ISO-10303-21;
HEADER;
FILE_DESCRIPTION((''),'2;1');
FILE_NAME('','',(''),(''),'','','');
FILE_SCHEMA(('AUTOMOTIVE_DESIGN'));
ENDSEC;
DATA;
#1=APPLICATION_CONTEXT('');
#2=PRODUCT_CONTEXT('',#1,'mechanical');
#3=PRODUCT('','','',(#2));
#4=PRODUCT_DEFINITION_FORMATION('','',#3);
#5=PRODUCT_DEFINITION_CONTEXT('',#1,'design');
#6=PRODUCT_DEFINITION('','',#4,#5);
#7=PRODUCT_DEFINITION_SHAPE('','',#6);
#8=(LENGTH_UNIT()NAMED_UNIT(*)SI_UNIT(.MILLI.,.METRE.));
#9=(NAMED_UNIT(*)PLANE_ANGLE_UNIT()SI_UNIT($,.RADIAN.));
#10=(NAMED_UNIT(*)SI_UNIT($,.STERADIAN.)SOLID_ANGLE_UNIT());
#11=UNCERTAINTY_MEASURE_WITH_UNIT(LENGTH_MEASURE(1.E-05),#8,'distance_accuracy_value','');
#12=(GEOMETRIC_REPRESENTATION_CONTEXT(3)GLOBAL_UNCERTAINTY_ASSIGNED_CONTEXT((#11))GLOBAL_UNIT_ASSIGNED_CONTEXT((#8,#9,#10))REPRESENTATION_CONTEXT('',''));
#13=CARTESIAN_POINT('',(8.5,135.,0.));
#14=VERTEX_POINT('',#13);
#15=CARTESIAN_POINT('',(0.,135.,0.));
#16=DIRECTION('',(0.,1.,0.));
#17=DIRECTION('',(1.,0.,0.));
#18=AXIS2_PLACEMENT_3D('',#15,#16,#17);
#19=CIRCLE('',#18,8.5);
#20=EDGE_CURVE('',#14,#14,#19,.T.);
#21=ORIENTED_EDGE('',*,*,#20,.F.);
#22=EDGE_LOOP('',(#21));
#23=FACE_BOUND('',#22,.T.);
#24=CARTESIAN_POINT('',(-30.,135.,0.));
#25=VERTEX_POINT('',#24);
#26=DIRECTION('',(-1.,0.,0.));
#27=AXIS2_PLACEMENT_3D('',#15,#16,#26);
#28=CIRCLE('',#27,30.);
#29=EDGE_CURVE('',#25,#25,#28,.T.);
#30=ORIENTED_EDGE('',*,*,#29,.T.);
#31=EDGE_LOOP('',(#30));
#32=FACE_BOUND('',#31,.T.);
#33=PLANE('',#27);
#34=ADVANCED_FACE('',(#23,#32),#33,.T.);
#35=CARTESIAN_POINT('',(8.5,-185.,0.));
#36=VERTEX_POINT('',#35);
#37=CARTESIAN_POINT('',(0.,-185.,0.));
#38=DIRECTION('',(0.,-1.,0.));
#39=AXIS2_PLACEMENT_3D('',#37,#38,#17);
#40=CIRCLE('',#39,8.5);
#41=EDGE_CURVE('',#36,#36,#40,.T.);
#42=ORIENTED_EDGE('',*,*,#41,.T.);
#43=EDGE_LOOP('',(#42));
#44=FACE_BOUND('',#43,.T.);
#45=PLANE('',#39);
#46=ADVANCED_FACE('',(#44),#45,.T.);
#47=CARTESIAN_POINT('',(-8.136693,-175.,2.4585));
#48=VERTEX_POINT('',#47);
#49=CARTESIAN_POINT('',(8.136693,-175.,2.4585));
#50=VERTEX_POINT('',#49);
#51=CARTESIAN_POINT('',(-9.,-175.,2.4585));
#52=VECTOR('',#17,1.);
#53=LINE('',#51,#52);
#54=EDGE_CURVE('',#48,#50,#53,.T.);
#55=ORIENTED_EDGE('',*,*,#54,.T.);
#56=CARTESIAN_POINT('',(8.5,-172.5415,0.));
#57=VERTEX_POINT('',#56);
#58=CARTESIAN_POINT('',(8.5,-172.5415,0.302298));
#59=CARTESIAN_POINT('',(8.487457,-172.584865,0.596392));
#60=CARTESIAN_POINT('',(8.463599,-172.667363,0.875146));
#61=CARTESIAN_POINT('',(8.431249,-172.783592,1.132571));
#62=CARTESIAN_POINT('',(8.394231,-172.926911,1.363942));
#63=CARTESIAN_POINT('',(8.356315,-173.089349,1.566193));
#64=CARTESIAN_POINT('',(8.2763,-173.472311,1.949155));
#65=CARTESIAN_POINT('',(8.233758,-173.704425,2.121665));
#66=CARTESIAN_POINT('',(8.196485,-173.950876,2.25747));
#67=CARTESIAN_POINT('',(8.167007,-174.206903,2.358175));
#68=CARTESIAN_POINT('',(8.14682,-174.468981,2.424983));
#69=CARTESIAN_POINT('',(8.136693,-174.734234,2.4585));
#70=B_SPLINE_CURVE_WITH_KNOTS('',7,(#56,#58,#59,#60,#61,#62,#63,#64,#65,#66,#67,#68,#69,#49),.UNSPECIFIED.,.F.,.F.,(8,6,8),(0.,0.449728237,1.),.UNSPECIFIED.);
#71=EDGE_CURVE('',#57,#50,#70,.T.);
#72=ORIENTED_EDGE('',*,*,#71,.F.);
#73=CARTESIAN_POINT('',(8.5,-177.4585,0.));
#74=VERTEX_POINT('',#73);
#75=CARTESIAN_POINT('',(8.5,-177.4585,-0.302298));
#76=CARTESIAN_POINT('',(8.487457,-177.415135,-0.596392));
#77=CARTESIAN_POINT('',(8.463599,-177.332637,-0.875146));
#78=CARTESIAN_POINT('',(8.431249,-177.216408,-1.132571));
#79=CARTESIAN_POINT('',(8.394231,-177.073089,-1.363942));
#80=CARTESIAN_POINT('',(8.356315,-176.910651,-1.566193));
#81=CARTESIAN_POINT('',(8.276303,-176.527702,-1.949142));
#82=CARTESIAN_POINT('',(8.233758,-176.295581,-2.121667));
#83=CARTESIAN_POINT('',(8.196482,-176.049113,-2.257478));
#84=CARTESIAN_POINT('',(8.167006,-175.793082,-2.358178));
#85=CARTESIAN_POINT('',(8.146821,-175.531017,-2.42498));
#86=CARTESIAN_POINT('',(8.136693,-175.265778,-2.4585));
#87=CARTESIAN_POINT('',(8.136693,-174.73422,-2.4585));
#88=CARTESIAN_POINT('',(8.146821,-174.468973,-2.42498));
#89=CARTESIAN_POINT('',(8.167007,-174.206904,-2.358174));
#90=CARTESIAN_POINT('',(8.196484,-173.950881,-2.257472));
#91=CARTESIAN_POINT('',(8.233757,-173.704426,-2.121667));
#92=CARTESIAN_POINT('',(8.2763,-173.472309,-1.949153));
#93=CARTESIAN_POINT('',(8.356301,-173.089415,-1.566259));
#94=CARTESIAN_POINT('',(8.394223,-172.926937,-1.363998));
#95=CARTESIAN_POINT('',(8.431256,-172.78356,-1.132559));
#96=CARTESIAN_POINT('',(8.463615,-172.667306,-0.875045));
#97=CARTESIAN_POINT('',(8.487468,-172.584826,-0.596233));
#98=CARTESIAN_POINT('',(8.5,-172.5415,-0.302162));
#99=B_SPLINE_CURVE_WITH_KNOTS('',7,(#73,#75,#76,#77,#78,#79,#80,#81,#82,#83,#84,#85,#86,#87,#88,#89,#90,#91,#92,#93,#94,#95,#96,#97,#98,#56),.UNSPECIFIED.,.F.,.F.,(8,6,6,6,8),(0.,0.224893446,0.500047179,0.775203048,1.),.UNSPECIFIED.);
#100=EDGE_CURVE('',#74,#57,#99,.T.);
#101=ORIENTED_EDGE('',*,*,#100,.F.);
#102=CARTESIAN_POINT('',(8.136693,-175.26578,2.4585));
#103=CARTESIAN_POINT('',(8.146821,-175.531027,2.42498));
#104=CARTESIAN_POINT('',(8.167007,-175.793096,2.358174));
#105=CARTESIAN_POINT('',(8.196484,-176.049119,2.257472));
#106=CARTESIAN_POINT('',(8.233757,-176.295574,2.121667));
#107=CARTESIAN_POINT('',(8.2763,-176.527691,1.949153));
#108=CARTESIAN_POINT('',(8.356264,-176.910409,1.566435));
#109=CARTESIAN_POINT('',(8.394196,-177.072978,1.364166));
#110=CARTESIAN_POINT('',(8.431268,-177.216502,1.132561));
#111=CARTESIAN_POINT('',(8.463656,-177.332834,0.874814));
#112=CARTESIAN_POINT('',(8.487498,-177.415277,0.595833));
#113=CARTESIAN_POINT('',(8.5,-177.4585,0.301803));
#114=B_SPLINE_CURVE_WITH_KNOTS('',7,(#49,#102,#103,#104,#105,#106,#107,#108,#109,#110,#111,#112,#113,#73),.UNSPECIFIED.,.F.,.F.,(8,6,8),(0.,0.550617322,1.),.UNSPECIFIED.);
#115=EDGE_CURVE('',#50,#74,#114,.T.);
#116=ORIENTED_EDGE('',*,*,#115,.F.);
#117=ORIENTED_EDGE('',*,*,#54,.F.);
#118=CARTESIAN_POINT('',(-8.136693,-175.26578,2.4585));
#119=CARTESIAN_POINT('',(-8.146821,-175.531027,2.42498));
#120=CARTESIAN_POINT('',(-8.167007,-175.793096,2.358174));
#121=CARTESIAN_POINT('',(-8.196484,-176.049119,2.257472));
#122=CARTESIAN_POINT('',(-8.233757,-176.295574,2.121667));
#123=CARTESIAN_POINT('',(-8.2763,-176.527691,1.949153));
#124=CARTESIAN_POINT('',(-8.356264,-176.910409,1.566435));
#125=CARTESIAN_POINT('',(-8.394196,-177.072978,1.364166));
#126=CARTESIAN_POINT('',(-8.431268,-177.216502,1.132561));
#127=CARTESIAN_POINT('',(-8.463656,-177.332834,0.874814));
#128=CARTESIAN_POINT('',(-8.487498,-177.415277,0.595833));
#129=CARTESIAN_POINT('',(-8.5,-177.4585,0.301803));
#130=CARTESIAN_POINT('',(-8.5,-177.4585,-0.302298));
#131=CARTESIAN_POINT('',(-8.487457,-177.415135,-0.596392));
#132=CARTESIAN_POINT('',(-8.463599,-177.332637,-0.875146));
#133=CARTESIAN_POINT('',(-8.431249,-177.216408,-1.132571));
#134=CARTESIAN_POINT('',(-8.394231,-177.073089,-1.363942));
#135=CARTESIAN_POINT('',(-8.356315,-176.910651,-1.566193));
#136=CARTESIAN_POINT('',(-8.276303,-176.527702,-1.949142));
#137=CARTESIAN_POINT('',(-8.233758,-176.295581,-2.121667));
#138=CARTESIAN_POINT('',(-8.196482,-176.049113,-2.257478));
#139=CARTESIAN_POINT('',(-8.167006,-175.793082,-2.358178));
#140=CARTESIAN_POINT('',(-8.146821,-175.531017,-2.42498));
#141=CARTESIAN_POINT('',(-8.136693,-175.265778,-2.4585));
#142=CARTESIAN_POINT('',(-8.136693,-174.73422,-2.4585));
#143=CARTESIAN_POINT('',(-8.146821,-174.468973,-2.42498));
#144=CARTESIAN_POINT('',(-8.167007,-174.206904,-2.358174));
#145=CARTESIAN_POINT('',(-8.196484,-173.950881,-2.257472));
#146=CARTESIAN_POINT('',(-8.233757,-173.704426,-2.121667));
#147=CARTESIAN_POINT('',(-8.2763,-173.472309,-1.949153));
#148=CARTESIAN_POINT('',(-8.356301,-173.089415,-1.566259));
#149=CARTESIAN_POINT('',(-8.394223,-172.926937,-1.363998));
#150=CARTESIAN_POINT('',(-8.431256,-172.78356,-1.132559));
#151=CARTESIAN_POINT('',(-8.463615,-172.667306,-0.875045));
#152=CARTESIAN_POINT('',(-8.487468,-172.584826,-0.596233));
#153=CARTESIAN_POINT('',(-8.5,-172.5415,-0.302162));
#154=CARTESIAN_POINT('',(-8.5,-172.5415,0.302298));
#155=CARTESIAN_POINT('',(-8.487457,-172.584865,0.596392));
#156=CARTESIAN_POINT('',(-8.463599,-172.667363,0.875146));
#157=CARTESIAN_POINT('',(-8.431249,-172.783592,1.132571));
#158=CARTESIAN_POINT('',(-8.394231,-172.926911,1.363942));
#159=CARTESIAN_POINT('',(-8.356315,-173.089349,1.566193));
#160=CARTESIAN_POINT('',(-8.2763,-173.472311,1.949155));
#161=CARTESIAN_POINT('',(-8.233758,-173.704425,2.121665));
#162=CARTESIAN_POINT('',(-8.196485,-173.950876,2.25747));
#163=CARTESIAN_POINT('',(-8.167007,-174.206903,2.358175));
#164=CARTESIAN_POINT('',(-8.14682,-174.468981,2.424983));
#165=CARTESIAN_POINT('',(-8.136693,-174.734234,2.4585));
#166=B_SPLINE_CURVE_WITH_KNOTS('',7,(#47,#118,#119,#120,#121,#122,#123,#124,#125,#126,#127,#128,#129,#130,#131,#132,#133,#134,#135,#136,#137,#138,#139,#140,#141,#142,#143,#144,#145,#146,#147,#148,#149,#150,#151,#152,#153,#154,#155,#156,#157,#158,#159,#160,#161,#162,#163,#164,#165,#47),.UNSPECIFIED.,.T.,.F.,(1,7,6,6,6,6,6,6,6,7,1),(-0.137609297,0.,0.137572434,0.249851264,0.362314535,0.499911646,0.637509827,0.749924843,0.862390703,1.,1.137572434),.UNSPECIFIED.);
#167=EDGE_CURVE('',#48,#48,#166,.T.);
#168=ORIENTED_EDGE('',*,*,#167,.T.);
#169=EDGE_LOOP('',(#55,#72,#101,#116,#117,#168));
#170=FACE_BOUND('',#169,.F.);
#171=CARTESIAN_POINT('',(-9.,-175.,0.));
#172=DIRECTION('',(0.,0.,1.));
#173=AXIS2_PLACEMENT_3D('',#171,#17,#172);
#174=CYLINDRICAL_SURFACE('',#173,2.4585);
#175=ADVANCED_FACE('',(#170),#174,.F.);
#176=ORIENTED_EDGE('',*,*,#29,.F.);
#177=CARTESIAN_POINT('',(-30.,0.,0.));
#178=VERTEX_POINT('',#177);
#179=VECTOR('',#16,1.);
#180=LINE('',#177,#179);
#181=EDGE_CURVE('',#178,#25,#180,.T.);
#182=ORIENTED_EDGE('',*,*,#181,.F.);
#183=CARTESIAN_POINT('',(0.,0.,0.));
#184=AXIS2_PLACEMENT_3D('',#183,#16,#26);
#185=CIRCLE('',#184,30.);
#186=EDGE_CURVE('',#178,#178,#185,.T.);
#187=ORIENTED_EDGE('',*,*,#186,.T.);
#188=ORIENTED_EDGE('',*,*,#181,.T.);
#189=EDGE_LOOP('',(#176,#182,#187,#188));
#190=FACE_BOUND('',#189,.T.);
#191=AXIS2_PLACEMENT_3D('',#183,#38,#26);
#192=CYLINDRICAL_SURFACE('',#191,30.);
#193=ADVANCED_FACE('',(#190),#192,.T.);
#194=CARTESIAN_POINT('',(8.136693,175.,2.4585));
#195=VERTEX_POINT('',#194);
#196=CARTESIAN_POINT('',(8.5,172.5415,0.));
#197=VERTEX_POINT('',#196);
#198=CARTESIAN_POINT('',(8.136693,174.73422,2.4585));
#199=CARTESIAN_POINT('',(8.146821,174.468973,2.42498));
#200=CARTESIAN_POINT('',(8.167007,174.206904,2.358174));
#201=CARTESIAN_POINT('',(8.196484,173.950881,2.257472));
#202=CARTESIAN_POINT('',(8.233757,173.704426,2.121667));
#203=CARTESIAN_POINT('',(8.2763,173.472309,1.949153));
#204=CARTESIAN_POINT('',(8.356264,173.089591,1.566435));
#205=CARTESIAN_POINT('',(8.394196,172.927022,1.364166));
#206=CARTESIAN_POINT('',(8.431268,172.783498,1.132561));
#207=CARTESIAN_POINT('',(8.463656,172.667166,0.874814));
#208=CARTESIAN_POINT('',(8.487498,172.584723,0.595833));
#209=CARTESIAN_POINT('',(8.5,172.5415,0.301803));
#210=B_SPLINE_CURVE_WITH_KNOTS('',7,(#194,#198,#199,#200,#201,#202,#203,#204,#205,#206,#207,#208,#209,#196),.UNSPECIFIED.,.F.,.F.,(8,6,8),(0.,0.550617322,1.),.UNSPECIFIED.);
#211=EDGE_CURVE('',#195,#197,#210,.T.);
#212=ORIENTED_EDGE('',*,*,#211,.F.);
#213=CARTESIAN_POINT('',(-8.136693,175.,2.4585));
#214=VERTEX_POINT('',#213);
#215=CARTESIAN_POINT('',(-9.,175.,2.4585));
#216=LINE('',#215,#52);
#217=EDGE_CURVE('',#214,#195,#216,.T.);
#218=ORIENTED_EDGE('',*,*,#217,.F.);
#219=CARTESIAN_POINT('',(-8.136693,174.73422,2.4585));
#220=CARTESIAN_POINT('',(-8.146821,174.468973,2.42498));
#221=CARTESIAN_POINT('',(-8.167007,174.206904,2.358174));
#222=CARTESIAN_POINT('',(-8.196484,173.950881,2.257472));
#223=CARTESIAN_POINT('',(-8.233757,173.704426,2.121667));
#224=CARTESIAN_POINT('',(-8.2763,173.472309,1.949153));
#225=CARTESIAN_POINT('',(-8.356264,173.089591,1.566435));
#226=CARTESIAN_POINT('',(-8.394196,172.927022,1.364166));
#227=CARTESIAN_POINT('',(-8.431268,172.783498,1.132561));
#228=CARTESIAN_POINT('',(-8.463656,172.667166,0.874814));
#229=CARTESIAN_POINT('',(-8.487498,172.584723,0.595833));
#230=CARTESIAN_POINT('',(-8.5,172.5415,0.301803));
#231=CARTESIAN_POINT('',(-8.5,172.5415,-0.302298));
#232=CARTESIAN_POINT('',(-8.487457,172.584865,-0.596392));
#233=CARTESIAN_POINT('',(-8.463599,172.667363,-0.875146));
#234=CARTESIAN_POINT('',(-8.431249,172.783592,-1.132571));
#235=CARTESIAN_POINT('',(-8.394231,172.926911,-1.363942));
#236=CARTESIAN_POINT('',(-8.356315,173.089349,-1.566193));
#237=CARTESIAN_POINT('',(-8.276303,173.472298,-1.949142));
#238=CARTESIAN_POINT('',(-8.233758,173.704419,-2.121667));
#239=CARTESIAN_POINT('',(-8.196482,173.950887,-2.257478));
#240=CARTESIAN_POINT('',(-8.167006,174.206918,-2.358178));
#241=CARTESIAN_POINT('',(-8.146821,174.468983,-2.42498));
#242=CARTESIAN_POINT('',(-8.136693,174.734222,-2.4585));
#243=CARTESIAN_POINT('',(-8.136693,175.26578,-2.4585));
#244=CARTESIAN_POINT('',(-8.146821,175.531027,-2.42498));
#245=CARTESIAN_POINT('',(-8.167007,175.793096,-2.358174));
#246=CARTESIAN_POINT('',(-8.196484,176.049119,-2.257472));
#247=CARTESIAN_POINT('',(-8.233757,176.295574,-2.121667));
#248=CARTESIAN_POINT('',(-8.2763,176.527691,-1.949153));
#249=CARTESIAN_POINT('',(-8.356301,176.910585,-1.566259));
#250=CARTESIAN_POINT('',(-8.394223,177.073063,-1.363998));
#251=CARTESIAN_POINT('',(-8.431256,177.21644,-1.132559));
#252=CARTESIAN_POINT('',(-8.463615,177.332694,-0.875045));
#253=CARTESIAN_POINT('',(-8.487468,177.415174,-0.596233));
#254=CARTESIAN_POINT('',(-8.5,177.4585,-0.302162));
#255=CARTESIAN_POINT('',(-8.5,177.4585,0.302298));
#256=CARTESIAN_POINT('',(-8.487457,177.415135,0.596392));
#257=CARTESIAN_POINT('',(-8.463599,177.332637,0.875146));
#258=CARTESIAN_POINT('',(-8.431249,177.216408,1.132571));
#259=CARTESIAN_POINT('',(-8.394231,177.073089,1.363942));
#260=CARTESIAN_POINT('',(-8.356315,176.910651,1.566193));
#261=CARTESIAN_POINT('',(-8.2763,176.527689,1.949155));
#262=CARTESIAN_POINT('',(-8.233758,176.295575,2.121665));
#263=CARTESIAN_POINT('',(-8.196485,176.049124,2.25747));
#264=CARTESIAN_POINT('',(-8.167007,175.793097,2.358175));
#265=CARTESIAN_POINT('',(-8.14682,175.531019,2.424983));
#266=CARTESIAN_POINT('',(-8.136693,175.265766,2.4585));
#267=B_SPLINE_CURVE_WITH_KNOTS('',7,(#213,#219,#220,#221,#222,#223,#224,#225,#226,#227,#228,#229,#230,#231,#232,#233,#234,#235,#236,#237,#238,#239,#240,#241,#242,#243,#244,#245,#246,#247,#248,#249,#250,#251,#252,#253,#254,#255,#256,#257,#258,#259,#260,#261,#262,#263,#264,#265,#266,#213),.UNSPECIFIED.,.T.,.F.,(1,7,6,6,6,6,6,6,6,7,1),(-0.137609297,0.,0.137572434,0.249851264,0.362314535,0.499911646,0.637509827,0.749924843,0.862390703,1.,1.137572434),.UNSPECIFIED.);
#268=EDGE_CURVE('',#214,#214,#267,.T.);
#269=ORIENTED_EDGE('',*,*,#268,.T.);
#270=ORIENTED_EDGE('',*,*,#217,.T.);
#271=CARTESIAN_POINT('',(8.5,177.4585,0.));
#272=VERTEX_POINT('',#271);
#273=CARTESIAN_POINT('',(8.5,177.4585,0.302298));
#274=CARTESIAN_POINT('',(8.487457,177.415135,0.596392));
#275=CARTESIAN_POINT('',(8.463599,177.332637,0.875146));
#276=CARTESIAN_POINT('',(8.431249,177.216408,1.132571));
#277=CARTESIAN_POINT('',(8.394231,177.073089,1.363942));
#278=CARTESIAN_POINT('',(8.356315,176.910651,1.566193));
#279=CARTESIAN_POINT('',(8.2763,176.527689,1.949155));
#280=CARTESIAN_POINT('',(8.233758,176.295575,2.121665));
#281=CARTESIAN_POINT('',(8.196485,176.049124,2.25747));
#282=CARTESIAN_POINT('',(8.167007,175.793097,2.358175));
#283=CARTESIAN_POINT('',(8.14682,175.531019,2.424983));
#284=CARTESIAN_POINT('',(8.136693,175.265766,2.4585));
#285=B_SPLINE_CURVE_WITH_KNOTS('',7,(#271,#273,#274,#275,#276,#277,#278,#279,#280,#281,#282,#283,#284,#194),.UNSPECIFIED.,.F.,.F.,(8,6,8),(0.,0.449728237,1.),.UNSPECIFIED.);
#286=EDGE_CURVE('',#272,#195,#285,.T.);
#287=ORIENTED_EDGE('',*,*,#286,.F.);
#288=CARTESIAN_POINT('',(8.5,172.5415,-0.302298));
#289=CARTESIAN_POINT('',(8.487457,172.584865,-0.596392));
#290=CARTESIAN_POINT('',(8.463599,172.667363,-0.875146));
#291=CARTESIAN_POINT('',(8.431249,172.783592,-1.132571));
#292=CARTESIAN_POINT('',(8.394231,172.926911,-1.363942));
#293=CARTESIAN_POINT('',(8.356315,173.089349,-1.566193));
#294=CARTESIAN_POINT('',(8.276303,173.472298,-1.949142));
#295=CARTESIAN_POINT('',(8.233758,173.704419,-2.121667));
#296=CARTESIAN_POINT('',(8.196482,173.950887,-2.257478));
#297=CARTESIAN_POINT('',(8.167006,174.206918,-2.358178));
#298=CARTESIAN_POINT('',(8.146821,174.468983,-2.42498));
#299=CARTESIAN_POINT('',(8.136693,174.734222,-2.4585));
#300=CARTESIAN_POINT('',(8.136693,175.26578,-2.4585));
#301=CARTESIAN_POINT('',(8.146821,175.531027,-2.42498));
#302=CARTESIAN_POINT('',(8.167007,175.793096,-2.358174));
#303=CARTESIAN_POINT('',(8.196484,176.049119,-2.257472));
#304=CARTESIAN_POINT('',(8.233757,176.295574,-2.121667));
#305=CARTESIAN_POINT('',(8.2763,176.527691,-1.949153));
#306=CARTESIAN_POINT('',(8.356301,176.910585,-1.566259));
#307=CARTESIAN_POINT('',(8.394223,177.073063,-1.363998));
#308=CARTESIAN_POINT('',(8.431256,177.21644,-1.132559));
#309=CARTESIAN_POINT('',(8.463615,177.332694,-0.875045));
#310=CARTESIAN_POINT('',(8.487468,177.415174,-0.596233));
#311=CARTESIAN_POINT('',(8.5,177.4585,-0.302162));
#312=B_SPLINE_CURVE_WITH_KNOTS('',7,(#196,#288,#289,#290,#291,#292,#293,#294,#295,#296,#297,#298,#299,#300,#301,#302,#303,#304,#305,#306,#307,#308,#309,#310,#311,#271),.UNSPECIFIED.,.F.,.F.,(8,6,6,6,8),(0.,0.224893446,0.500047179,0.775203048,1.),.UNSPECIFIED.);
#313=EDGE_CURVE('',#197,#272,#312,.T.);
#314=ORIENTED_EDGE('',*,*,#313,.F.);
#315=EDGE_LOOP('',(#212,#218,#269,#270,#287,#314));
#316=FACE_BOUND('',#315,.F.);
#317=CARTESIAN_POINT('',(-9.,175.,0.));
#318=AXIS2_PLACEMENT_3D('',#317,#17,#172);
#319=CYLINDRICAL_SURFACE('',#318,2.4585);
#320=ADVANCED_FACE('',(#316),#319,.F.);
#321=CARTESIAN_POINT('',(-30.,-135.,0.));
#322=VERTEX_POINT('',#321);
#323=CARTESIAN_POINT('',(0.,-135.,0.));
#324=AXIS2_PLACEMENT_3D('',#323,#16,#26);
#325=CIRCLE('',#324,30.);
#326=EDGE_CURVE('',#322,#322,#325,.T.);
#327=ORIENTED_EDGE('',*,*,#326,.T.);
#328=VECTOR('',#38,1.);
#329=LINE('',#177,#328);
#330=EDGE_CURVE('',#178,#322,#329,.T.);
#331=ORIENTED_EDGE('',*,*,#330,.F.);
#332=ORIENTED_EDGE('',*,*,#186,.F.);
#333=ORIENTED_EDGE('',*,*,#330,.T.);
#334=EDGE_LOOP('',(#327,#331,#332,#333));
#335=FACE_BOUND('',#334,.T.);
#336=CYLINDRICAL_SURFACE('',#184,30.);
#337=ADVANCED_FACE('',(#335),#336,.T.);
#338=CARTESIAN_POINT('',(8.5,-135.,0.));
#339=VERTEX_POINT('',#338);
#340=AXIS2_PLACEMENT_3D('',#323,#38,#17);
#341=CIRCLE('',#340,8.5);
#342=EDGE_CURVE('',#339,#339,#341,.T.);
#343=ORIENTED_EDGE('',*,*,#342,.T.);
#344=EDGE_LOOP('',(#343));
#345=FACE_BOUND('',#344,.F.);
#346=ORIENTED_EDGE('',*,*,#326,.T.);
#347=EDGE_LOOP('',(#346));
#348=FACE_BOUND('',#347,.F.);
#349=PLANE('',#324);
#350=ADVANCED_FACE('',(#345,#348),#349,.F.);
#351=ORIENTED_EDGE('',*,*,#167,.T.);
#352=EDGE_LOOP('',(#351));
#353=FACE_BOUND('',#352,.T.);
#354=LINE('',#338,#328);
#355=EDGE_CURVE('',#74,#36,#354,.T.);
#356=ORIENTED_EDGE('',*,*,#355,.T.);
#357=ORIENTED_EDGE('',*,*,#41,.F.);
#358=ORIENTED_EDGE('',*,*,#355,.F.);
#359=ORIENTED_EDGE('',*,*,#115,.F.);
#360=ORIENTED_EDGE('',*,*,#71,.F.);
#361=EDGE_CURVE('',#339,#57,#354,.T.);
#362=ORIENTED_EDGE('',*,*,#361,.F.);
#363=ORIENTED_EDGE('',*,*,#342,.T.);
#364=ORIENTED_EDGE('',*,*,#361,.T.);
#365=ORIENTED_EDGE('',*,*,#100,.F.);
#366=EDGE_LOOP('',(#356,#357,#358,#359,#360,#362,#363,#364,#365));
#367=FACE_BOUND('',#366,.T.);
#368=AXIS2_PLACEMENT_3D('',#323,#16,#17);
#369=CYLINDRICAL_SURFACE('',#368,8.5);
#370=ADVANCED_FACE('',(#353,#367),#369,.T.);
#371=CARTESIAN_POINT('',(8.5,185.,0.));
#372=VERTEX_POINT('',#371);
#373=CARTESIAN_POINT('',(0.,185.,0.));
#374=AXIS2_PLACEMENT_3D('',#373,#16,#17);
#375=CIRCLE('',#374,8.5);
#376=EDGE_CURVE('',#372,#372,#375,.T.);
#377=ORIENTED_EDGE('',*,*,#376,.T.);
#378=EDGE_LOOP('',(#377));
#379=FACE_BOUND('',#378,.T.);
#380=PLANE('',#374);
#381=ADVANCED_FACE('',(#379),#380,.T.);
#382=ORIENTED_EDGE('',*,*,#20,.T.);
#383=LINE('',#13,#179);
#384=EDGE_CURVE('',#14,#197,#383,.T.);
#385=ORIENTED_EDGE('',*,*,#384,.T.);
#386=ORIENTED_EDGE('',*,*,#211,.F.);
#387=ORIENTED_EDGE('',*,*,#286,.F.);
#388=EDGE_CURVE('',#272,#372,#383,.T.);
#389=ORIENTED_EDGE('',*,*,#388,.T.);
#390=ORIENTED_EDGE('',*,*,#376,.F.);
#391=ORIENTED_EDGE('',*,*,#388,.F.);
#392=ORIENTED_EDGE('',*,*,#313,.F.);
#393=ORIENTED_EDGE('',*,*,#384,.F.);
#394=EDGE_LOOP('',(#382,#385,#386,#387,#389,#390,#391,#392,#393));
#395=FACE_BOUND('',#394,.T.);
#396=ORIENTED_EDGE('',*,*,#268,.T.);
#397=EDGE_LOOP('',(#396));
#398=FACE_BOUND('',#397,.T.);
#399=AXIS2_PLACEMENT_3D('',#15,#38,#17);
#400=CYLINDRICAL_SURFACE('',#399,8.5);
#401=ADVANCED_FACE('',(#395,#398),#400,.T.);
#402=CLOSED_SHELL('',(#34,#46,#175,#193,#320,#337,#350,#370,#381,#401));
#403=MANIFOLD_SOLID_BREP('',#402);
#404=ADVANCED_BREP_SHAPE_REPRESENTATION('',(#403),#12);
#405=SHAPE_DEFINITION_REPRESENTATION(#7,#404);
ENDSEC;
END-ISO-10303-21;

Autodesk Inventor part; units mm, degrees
ref_plane "YZ Plane" through (0, 0, 0) normal (1, 0, 0) x (0, 1, 0)
ref_plane "XZ Plane" through (0, 0, 0) normal (0, 1, 0) x (-1, 0, 0)
sketch "Sketch1" plane through (0, 0, 0) normal (0, 1, 0) x (-1, 0, 0)
  circle A0 centre (0, 0) radius 30
  dimension "d0" = 60
extrude "Extrusion1" add sketch "Sketch1" along normal mid plane 270
sketch "Sketch2" plane through (0, -135, 0) normal (0, -1, 0) x (1, 0, 0)
  circle A0 centre (0, 0) radius 8.5
  dimension "d3" = 17
extrude "Extrusion2" add sketch "Sketch2" along normal blind 50
sketch "Sketch3" plane through (0, 135, 0) normal (0, 1, 0) x (1, 0, 0)
  circle A0 centre (0, 0) radius 8.5 projected
  circle A1 centre (0, 0) radius 8.5
  dimension "d6" = 17
extrude "Extrusion3" add sketch "Sketch3" along normal blind 50
ref_plane "Work Plane1" through (-9, 150, 0) normal (-1, 0, 0) x (0, 1, 0)
sketch "Sketch4" plane through (-9, 150, 0) normal (-1, 0, 0) x (0, 1, 0)
  circle A0 centre (25, 0) radius 4 projected
  circle A1 centre (-325, 0) radius 4 projected
  point P0 (-150, 0)
  point P1 (25, 0)
  point P2 (-325, 0)
hole "Hole1" at (-9, 175, 0) at (-9, -175, 0) direction (1, 0, 0) diameter 4.917 end through all thread size "M6x1" class "6H" standard "ISO Metric profile"
properties part number "HCMUTE-CDT23-TRUC_CANG" material "Stainless Steel"
